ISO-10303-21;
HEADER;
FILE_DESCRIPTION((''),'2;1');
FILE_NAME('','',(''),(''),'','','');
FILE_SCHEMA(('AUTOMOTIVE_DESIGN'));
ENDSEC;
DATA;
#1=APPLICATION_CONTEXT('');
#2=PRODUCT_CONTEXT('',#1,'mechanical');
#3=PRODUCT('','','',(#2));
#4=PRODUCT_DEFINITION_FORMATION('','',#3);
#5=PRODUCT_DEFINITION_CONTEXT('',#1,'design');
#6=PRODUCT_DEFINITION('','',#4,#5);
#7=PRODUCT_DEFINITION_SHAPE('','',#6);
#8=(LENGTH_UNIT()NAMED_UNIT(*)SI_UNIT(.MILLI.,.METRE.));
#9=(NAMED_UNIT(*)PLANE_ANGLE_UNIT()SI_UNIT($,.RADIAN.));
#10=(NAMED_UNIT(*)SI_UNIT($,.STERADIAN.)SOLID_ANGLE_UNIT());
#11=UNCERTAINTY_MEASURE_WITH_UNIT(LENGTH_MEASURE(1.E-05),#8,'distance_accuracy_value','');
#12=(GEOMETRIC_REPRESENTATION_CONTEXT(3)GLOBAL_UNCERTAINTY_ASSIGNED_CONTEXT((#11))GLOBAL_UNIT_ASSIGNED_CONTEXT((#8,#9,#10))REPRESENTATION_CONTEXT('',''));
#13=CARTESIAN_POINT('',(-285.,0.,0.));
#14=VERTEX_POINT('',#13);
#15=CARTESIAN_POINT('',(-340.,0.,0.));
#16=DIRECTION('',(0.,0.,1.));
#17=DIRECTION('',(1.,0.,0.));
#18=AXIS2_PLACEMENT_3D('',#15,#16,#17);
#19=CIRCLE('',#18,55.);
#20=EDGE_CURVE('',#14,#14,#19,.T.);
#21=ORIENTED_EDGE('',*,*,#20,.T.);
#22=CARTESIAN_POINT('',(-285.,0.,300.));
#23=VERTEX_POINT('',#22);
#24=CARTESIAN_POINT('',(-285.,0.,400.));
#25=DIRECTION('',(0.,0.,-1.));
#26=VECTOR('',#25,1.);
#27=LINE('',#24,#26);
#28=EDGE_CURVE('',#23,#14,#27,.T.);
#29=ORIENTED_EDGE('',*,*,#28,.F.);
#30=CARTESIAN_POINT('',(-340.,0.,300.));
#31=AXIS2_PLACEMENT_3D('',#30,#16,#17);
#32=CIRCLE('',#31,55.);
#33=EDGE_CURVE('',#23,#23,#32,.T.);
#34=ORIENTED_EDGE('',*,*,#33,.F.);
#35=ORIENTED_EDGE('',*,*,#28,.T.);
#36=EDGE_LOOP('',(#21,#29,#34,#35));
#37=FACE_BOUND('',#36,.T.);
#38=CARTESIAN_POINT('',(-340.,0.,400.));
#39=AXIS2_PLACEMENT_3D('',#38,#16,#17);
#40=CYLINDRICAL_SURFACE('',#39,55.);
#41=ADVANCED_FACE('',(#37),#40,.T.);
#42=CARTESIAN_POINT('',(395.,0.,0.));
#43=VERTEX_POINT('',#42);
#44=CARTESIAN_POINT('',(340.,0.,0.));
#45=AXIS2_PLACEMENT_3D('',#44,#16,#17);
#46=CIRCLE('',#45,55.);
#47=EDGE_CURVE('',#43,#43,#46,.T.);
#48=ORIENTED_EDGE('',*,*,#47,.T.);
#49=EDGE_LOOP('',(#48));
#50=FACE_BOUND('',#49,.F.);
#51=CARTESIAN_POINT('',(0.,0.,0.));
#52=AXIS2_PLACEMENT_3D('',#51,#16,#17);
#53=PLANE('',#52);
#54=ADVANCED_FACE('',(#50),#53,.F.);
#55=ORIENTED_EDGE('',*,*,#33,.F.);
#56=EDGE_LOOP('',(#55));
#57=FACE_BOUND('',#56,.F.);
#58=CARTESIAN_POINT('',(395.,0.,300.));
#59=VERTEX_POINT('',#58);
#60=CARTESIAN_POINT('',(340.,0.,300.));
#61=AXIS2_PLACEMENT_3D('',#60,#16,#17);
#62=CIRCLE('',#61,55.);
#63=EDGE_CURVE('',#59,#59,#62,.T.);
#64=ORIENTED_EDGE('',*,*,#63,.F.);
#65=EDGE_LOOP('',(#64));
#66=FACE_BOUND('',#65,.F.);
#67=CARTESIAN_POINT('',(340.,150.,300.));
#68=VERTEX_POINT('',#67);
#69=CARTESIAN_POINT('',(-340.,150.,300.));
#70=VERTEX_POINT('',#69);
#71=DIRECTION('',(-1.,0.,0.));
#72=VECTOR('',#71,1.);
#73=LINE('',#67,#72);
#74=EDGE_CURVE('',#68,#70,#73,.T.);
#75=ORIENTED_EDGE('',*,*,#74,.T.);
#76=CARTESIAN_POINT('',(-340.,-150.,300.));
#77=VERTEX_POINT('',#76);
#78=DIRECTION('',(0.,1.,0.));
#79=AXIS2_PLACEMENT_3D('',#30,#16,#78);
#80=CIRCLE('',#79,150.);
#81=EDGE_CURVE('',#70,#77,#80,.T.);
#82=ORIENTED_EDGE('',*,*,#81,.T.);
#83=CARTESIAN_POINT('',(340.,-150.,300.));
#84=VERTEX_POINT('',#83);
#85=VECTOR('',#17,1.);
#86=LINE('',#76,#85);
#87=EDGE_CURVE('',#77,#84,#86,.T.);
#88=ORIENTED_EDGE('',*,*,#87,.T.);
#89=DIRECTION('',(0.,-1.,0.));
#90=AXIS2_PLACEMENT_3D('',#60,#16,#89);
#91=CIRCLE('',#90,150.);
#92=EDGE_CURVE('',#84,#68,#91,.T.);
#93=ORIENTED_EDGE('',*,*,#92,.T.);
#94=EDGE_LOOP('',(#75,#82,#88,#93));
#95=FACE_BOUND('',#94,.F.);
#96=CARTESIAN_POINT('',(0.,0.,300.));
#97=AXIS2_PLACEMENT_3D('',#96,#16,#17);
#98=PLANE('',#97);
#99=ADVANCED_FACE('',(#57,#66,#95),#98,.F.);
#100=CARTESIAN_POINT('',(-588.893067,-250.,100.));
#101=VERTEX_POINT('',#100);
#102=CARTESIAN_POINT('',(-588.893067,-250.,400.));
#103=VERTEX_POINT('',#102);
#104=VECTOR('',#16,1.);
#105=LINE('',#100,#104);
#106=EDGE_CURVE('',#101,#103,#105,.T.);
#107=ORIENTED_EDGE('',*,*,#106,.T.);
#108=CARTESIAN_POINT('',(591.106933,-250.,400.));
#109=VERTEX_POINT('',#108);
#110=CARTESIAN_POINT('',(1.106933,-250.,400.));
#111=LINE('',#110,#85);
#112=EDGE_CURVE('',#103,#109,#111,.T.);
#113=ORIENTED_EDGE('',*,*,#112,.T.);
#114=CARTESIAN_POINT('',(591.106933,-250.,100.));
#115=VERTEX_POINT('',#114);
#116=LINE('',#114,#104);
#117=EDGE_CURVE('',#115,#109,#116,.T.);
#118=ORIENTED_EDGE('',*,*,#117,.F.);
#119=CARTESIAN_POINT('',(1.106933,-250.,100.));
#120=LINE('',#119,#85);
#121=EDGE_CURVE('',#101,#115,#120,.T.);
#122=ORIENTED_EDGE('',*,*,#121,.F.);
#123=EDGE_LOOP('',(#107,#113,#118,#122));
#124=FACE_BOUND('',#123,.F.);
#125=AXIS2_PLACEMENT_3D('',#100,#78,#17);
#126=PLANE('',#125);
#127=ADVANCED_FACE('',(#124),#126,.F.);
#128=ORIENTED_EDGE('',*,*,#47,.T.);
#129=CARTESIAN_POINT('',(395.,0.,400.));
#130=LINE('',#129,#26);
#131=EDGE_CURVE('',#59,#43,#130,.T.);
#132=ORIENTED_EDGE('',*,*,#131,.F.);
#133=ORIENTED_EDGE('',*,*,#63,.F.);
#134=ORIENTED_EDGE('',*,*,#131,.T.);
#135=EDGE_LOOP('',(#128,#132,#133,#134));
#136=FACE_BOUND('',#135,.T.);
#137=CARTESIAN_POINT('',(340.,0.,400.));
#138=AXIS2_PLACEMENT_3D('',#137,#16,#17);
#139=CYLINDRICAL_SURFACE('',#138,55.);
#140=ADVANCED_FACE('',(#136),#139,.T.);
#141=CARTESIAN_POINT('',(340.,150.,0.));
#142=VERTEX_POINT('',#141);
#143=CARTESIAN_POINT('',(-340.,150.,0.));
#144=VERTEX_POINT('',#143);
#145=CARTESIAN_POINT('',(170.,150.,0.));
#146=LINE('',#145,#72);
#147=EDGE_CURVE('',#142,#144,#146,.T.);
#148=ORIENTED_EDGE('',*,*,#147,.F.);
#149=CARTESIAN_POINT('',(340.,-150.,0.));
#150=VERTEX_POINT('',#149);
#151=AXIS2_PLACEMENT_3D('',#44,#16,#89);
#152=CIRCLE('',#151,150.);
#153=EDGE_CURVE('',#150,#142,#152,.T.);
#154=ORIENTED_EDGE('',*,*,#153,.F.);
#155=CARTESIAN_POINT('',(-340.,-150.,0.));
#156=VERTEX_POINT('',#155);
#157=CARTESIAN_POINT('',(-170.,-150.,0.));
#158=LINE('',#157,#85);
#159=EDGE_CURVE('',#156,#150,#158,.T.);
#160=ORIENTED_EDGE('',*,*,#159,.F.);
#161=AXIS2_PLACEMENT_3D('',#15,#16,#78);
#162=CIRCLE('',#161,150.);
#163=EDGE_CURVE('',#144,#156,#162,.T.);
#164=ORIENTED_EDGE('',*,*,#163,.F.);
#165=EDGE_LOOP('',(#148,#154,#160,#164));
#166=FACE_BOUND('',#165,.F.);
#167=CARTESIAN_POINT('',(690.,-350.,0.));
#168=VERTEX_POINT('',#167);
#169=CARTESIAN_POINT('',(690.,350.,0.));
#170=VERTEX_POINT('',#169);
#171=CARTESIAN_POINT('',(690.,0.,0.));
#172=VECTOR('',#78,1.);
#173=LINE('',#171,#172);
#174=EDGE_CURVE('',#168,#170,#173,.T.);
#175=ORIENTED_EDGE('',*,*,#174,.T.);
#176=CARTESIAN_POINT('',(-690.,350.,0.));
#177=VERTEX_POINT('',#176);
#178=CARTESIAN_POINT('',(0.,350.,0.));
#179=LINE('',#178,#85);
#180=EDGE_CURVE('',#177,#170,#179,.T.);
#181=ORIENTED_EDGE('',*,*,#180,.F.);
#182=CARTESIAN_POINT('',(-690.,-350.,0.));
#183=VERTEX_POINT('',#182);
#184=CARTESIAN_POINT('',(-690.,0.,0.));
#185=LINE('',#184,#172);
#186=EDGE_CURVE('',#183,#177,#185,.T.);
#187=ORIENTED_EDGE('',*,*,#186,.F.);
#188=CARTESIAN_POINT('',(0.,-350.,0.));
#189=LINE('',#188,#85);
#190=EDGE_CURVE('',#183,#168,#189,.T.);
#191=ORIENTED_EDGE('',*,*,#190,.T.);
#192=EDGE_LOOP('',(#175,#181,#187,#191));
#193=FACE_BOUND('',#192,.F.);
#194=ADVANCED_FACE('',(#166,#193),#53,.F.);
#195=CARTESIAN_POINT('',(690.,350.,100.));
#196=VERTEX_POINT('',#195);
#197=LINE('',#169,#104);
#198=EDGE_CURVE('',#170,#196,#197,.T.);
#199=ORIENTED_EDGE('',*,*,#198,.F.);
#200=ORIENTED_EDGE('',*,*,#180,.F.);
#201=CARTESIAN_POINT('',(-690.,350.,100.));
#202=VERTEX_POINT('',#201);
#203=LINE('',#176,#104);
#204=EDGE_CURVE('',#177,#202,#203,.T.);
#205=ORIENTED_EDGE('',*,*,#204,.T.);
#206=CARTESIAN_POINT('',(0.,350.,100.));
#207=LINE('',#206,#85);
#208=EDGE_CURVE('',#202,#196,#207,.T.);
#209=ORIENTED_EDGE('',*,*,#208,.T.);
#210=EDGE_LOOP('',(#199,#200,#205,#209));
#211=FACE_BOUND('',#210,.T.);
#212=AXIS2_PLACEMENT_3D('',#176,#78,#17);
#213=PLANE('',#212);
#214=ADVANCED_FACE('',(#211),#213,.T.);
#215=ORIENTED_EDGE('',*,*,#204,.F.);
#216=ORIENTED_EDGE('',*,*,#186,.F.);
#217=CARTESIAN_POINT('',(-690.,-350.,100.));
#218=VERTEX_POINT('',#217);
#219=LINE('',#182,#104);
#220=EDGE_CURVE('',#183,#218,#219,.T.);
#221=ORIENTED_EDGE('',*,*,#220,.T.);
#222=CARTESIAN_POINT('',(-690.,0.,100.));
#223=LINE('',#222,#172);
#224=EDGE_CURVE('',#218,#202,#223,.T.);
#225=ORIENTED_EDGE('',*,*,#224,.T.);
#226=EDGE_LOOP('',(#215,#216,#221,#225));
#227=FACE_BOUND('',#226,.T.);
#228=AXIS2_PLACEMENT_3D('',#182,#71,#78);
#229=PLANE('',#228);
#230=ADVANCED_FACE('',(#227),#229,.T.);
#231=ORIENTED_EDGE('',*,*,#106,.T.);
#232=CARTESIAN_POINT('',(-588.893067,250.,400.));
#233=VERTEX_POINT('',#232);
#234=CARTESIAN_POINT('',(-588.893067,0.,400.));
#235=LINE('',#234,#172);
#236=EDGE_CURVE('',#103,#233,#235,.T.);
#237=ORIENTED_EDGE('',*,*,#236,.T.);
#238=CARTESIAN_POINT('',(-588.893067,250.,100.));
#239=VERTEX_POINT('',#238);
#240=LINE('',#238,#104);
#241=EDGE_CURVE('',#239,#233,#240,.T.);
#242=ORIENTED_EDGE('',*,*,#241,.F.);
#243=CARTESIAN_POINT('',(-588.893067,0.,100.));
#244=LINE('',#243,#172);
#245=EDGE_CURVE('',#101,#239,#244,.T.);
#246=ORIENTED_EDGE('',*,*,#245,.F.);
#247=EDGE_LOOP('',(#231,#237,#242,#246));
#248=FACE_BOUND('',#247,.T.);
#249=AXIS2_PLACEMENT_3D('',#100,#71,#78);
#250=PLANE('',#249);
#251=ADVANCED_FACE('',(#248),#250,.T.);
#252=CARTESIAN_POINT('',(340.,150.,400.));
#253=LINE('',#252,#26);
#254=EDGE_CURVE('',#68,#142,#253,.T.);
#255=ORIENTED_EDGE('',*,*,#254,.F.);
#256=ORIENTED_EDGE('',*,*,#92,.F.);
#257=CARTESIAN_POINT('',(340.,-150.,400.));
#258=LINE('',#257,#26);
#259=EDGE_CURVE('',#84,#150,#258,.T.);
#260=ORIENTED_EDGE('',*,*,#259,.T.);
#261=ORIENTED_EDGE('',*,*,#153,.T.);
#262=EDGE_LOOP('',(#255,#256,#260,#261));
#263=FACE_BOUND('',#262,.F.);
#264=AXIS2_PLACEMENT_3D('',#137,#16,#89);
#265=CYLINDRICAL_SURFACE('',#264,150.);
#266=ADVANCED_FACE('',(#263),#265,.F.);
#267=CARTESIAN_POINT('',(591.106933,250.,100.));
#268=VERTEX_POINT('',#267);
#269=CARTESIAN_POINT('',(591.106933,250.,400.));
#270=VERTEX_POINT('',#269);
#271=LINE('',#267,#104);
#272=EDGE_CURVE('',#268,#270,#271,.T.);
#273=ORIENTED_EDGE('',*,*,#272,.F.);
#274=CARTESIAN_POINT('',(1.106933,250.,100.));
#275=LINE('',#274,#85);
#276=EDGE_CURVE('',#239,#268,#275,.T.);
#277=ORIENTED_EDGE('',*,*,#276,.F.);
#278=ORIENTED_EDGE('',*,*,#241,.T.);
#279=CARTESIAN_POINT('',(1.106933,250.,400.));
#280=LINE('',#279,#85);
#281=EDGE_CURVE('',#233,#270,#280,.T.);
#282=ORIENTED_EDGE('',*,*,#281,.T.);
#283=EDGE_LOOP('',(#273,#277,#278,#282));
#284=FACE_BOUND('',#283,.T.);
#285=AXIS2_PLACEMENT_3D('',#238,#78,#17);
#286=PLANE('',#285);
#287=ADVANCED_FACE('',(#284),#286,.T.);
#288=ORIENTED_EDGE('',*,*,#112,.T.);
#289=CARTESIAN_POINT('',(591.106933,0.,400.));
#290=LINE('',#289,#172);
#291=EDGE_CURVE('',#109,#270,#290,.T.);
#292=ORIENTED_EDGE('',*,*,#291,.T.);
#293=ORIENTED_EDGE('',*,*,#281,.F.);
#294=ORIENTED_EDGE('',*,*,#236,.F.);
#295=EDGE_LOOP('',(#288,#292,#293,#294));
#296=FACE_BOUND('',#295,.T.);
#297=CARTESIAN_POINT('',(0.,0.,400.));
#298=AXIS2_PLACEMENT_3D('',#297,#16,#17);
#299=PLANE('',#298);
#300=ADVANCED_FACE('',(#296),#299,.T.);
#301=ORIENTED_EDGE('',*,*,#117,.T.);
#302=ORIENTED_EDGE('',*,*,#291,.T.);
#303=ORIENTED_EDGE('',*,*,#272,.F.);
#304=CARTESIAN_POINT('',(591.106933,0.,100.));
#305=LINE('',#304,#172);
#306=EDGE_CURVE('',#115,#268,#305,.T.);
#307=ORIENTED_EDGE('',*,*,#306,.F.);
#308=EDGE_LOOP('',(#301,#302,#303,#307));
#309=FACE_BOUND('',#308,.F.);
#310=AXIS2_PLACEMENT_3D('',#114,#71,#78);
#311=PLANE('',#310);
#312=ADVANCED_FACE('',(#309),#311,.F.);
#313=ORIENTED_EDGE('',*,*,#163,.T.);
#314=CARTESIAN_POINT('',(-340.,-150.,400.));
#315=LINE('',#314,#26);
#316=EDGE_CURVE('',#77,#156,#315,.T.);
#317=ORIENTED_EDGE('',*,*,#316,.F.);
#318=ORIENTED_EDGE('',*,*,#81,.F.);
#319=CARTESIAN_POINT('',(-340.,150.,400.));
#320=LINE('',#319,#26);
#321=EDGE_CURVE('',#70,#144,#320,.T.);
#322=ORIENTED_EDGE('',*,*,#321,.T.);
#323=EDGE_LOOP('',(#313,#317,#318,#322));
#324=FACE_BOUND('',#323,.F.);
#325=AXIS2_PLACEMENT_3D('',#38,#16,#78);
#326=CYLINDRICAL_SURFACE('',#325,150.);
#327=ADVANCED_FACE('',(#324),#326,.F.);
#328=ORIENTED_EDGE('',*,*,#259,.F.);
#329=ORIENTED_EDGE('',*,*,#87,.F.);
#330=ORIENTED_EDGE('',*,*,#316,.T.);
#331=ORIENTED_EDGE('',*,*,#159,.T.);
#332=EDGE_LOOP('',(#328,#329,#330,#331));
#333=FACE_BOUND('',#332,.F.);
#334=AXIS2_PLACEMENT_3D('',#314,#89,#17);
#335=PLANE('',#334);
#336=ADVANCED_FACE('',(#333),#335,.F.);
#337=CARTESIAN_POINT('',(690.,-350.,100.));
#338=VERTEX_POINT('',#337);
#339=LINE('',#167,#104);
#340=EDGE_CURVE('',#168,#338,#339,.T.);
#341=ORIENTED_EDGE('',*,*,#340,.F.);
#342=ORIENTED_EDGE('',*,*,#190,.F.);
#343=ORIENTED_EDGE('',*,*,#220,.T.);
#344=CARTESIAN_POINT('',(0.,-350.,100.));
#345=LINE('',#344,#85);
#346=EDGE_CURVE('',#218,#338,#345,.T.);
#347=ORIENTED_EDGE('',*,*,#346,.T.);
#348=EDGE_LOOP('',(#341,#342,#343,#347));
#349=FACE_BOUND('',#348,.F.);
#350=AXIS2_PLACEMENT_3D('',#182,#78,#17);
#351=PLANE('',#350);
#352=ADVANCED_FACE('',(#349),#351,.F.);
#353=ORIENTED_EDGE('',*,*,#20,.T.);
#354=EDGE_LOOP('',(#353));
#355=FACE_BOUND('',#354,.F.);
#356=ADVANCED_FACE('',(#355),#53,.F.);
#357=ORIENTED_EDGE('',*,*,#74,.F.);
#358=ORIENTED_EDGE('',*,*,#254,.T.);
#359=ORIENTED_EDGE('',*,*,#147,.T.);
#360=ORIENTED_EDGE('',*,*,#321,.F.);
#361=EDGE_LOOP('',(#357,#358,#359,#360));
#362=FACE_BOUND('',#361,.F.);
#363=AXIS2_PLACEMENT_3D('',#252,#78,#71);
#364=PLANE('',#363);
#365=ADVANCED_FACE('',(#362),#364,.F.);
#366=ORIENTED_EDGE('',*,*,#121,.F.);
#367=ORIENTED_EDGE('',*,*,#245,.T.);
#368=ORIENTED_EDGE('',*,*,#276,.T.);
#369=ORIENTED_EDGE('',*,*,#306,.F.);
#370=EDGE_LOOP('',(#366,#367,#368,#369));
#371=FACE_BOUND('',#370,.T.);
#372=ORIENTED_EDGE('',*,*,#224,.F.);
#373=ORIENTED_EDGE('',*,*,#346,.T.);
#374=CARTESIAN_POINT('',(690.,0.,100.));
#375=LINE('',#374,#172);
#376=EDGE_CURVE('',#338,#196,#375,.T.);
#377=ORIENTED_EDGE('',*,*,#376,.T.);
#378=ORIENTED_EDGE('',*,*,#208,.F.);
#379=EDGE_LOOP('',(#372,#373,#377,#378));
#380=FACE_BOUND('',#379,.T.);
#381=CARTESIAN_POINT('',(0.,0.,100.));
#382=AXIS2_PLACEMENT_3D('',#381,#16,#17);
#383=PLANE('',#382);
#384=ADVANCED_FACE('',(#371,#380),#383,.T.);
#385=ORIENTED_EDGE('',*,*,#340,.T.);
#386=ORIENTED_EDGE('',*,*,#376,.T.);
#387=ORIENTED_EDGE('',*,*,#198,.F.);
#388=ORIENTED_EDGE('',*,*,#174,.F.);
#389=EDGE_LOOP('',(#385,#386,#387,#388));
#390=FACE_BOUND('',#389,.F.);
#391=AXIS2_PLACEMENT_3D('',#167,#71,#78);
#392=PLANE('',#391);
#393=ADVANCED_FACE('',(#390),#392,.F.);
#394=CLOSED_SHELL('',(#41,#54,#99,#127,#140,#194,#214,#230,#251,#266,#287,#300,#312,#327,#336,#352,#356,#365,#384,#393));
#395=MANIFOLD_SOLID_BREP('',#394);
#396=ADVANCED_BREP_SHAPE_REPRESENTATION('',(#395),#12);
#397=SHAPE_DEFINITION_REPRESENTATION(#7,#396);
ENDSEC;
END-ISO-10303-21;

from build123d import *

# Parameters (mm, degrees)
F0_W     = 1380
F0_H     = 700
F0_W_2   = 1180
F0_H_2   = 500
F1_DEPTH = 100
F2_W     = 1180
F2_H     = 500
F3_DEPTH = 300
F4_R     = 55
F5_DEPTH = 1819
F6_DEPTH = 400.001
F8_DEPTH = 100


# Not quite as in the source:
# - an extrude ends at something that could not be found from the text; its depth is read off the source's solid
# - a feature of the source that left no trace in its solid (it failed there, or was rolled back) is left out


with BuildPart() as f1:
    # F0 (on Top) → F1 (new body)
    with BuildSketch(Plane.XY):
        Rectangle(F0_W, F0_H)
        Rectangle(F0_W_2, F0_H_2, mode=Mode.SUBTRACT)
        Rectangle(F0_W_2, F0_H_2)
    extrude(amount=F1_DEPTH)

    # F2 (on face) → F3 (join)
    with BuildSketch(Plane.XY.offset(100)):
        with Locations((1.1069327593, 0)):
            Rectangle(F2_W, F2_H)
    extrude(amount=F3_DEPTH)

    # F4 (on face) → F5 (cut, through all)
    with BuildSketch(Plane.XY.offset(400)):
        with BuildLine():
            ThreePointArc((-340, 150), (-490, 0), (-340, -150))
            Line((-340, -150), (340, -150))
            ThreePointArc((340, -150), (490, 0), (340, 150))
            Line((340, 150), (-340, 150))
        make_face()
        with Locations((-340, 0)):
            Circle(F4_R, mode=Mode.SUBTRACT)
        with Locations((340, 0)):
            Circle(F4_R, mode=Mode.SUBTRACT)
    extrude(amount=F5_DEPTH, mode=Mode.SUBTRACT)

    # F4 (on face) → F6 (cut, through all)
    with BuildSketch(Plane.XY.offset(400)):
        with BuildLine():
            ThreePointArc((-340, 150), (-490, 0), (-340, -150))
            Line((-340, -150), (340, -150))
            ThreePointArc((340, -150), (490, 0), (340, 150))
            Line((340, 150), (-340, 150))
        make_face()
        with Locations((-340, 0)):
            Circle(F4_R, mode=Mode.SUBTRACT)
        with Locations((340, 0)):
            Circle(F4_R, mode=Mode.SUBTRACT)
    extrude(amount=-F6_DEPTH, mode=Mode.SUBTRACT)

    # F4 (on face) → F8 (join)
    with BuildSketch(Plane.XY.offset(400)):
        with BuildLine():
            ThreePointArc((-340, 150), (-490, 0), (-340, -150))
            Line((-340, -150), (340, -150))
            ThreePointArc((340, -150), (490, 0), (340, 150))
            Line((340, 150), (-340, 150))
        make_face()
        with Locations((-340, 0)):
            Circle(F4_R, mode=Mode.SUBTRACT)
        with Locations((340, 0)):
            Circle(F4_R, mode=Mode.SUBTRACT)
        with Locations((-340, 0)):
            Circle(F4_R)
        with Locations((340, 0)):
            Circle(F4_R)
    extrude(amount=-F8_DEPTH)


solid = f1.part
